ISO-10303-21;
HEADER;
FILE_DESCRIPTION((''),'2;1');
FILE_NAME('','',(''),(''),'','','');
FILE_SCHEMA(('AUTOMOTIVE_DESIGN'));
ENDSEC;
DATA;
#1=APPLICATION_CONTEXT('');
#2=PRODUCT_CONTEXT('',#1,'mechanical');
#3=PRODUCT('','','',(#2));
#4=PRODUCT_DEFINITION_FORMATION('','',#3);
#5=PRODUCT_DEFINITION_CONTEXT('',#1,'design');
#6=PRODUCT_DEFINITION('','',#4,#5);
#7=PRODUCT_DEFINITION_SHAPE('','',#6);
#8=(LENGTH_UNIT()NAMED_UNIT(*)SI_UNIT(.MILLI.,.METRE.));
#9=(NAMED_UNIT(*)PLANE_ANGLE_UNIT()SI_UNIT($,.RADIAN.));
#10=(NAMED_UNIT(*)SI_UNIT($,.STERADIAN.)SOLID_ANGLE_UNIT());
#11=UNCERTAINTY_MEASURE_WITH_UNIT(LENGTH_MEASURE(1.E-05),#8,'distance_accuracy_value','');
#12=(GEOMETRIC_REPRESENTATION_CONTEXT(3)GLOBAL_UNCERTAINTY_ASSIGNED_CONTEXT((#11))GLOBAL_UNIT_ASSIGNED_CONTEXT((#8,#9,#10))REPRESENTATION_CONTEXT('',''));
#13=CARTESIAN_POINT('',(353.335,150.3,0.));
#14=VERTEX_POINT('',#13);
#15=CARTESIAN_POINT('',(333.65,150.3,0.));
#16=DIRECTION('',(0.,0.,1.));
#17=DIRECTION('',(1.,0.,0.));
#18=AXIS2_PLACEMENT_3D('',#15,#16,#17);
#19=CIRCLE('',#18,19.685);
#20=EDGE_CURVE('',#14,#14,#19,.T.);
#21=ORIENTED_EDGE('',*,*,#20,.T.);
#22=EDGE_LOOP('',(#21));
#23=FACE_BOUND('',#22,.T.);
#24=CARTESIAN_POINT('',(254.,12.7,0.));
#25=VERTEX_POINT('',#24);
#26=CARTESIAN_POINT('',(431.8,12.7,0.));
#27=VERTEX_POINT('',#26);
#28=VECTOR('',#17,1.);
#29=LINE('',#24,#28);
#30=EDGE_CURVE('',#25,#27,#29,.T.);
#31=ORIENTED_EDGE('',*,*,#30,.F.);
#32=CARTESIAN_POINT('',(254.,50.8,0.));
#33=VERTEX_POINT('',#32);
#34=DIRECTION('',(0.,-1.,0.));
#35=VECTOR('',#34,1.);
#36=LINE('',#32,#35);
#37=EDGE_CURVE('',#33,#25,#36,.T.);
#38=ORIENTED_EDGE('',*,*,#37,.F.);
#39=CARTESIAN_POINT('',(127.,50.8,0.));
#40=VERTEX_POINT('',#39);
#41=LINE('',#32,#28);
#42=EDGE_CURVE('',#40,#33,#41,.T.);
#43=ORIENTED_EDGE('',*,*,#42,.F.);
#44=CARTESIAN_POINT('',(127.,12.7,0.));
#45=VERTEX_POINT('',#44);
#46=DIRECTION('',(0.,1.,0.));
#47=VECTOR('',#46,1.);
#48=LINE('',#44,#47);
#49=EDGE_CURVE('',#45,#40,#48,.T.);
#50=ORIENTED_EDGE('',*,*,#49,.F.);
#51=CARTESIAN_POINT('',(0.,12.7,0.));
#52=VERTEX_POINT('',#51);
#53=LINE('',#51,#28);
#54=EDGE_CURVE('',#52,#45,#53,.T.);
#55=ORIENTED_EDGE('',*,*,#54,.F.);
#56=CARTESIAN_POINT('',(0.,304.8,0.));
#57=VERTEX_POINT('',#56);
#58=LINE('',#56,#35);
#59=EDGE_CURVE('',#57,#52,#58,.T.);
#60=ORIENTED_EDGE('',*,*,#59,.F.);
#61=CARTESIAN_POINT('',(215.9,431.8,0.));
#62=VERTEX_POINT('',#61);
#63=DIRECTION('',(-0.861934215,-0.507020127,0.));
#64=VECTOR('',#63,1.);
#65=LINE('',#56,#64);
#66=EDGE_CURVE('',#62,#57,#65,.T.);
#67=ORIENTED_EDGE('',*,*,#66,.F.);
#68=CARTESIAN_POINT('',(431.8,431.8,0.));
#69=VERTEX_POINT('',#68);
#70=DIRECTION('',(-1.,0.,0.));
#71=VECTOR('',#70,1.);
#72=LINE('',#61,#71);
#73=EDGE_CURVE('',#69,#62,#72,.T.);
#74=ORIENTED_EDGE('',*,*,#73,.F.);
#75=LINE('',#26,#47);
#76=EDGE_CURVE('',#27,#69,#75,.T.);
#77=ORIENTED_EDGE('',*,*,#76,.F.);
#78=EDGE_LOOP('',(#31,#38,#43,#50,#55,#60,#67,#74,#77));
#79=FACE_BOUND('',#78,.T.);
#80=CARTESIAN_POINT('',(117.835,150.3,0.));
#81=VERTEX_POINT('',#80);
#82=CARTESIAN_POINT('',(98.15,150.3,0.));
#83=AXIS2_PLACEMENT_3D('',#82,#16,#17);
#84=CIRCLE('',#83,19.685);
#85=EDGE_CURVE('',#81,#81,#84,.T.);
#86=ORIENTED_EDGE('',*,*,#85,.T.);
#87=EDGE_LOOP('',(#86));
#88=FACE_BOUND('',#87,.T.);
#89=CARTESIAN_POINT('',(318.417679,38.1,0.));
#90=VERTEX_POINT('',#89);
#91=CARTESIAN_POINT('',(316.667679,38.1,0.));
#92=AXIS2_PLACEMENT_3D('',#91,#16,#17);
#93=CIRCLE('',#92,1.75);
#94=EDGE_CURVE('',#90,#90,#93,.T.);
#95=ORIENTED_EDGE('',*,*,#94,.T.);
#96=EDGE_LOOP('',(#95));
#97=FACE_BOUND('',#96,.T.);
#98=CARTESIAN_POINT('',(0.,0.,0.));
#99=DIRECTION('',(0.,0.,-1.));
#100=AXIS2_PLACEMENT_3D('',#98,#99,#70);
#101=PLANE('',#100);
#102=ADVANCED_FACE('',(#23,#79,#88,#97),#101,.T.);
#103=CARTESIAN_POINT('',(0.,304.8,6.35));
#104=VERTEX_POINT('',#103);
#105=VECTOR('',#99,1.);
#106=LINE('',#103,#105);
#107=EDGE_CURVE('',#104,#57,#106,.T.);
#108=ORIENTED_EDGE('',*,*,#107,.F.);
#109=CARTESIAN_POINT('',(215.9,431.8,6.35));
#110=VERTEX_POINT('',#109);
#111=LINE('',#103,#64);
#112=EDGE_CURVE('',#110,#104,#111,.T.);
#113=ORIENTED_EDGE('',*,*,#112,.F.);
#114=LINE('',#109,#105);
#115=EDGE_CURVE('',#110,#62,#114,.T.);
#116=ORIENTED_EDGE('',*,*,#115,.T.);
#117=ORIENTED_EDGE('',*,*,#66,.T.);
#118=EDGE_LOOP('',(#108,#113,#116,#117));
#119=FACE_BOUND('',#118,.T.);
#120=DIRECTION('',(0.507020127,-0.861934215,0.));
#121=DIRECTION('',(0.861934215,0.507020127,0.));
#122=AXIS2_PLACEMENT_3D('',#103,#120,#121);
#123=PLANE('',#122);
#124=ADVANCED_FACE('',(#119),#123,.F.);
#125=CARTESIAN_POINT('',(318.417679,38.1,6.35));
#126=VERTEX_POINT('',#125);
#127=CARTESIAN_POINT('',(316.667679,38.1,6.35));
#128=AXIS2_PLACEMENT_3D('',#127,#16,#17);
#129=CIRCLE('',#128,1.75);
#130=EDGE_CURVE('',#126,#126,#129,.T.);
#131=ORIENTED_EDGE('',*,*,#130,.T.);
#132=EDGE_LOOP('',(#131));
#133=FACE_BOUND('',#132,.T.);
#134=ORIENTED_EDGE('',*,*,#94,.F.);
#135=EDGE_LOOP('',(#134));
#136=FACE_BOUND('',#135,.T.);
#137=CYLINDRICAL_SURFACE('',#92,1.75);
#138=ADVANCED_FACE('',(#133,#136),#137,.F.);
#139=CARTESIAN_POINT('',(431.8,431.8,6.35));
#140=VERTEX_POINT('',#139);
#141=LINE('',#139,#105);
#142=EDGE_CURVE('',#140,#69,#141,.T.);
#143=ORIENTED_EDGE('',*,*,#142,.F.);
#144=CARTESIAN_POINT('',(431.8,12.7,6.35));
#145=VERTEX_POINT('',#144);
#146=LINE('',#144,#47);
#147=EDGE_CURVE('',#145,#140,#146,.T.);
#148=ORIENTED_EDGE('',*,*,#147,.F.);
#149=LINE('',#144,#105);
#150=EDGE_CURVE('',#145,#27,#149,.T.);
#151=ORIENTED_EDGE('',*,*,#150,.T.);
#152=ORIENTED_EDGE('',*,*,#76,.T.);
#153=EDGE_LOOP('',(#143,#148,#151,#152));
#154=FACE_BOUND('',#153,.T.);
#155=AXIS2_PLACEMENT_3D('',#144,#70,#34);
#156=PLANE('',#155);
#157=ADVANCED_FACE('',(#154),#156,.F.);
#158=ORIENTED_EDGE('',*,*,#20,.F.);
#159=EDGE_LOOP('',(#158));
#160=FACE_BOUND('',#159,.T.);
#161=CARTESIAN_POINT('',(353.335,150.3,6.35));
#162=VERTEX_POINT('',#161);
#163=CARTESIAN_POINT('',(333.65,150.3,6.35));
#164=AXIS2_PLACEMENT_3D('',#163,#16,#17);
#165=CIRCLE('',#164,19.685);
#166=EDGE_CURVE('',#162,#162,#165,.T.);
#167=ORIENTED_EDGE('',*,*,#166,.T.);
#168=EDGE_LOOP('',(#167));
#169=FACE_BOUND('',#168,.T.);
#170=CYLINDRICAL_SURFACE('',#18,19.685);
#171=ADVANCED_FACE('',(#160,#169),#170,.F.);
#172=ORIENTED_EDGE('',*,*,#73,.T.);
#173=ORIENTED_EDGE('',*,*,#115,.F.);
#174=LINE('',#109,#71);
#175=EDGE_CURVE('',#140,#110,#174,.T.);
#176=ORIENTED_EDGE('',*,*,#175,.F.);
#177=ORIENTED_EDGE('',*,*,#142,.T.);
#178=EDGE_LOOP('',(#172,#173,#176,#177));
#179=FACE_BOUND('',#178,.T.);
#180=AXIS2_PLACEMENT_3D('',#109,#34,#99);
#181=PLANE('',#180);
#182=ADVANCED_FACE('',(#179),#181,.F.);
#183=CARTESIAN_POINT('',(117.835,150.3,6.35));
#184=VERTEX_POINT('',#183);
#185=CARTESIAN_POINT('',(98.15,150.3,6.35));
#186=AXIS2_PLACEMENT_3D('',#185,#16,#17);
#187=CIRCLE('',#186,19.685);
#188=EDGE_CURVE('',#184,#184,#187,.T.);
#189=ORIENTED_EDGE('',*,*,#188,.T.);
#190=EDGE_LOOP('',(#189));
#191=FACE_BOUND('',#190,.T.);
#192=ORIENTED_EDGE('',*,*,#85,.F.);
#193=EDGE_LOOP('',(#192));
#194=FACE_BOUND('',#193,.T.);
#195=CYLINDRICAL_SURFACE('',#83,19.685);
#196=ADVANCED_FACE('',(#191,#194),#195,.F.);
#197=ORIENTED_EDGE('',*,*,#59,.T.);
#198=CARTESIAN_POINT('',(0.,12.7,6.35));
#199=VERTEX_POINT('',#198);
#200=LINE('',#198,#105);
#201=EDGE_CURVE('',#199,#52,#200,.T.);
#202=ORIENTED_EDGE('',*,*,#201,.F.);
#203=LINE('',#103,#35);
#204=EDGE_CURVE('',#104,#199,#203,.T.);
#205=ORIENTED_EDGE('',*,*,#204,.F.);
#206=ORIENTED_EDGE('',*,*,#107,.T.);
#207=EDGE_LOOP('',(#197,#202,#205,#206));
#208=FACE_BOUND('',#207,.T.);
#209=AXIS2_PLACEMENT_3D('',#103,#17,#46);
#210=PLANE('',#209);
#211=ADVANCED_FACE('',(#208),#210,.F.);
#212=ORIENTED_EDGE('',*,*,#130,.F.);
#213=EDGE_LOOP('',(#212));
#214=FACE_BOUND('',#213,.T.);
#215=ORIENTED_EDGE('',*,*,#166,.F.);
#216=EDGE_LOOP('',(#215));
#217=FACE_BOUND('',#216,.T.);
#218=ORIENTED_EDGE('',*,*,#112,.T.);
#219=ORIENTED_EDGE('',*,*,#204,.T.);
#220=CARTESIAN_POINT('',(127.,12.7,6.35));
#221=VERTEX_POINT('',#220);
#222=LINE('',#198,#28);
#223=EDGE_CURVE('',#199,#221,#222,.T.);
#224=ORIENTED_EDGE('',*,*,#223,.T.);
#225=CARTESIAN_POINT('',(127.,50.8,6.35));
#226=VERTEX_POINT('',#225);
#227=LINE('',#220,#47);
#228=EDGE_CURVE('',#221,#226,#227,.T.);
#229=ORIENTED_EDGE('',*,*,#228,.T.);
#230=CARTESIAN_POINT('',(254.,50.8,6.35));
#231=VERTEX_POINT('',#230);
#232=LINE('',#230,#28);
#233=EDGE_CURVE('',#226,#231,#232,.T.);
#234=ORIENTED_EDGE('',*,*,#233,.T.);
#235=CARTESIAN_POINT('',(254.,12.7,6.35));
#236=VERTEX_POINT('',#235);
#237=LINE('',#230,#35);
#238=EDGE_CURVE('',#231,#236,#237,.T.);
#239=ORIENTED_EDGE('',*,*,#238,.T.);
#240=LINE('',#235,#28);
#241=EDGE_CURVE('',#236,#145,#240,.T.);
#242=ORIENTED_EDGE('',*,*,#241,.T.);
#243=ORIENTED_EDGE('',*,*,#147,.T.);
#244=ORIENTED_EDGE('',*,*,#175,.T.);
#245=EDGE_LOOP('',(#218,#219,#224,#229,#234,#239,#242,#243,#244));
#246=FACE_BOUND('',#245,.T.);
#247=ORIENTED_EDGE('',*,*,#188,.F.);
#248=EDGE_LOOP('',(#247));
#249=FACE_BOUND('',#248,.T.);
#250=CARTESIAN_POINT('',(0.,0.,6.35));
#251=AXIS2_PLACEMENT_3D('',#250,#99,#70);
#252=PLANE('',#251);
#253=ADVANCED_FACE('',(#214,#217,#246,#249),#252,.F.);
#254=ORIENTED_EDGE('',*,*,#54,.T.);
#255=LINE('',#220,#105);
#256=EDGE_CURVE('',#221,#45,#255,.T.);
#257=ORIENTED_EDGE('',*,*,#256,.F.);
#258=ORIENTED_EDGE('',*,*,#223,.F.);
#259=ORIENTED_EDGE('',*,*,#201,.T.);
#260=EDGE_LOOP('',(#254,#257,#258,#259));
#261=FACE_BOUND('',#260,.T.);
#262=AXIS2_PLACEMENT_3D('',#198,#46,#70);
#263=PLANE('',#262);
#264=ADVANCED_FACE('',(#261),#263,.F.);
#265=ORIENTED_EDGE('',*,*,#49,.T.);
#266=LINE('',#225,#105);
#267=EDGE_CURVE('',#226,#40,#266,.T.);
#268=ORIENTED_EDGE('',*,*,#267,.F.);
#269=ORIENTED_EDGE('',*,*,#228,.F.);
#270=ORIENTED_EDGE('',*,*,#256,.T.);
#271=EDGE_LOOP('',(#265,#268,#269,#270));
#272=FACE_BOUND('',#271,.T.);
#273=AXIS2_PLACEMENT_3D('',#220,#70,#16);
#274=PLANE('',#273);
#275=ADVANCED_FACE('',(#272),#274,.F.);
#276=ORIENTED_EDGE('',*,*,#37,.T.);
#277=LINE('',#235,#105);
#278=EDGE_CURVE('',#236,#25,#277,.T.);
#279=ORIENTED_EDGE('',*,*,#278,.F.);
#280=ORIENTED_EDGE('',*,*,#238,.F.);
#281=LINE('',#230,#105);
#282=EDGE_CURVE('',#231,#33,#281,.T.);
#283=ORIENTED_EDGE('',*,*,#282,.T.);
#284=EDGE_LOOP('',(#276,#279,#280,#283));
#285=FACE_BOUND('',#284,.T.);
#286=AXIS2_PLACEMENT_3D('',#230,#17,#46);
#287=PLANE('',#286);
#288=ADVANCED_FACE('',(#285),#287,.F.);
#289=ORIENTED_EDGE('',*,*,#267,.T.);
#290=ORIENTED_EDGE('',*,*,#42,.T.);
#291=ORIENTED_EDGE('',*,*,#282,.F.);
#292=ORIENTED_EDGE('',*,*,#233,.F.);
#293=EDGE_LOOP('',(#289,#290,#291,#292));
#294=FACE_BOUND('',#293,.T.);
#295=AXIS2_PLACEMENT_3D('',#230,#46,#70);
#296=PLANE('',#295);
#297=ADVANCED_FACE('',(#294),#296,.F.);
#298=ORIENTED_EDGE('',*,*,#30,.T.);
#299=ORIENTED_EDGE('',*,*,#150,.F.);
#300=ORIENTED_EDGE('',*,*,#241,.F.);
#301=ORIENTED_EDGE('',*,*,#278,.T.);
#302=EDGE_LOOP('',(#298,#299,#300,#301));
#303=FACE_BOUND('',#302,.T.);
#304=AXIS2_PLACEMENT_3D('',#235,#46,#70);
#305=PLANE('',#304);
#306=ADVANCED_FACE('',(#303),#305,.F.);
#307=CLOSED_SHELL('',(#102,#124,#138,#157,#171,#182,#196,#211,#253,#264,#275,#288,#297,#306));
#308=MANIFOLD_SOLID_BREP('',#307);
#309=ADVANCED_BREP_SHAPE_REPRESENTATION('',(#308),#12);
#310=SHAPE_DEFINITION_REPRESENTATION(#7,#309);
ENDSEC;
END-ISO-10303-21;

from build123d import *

# Parameters (mm, degrees)
FRAME_EXTERIOR_MASTER_OUTLINE_R = 19.685
FRAME_EXTERIOR_MASTER_DEPTH     = 6.35
SKETCH1_R                       = 1.75
CUT_EXTRUDE1_DEPTH              = 611.690430988


# Read off the part's stored shape, not the designer's step: Frame Exterior Master
with BuildPart() as part:
    # Frame Exterior Master outline → Frame Exterior Master (new body)
    with BuildSketch(Plane.XY):
        Polygon((431.8, 12.7), (431.8, 431.8), (215.9, 431.8), (0, 304.8), (0, 12.7), (127, 12.7), (127, 50.8), (254, 50.8), (254, 12.7), align=None)
        with Locations((98.15, 150.3)):
            Circle(FRAME_EXTERIOR_MASTER_OUTLINE_R, mode=Mode.SUBTRACT)
        with Locations((333.65, 150.3)):
            Circle(FRAME_EXTERIOR_MASTER_OUTLINE_R, mode=Mode.SUBTRACT)
    extrude(amount=FRAME_EXTERIOR_MASTER_DEPTH)

    # Sketch1 → Cut-Extrude1 (cut, through all)
    with BuildSketch(Plane.XY.offset(6.35)):
        with Locations((316.667678943, 38.1)):
            Circle(SKETCH1_R)
    extrude(amount=-CUT_EXTRUDE1_DEPTH, mode=Mode.SUBTRACT)


solid = part.part
